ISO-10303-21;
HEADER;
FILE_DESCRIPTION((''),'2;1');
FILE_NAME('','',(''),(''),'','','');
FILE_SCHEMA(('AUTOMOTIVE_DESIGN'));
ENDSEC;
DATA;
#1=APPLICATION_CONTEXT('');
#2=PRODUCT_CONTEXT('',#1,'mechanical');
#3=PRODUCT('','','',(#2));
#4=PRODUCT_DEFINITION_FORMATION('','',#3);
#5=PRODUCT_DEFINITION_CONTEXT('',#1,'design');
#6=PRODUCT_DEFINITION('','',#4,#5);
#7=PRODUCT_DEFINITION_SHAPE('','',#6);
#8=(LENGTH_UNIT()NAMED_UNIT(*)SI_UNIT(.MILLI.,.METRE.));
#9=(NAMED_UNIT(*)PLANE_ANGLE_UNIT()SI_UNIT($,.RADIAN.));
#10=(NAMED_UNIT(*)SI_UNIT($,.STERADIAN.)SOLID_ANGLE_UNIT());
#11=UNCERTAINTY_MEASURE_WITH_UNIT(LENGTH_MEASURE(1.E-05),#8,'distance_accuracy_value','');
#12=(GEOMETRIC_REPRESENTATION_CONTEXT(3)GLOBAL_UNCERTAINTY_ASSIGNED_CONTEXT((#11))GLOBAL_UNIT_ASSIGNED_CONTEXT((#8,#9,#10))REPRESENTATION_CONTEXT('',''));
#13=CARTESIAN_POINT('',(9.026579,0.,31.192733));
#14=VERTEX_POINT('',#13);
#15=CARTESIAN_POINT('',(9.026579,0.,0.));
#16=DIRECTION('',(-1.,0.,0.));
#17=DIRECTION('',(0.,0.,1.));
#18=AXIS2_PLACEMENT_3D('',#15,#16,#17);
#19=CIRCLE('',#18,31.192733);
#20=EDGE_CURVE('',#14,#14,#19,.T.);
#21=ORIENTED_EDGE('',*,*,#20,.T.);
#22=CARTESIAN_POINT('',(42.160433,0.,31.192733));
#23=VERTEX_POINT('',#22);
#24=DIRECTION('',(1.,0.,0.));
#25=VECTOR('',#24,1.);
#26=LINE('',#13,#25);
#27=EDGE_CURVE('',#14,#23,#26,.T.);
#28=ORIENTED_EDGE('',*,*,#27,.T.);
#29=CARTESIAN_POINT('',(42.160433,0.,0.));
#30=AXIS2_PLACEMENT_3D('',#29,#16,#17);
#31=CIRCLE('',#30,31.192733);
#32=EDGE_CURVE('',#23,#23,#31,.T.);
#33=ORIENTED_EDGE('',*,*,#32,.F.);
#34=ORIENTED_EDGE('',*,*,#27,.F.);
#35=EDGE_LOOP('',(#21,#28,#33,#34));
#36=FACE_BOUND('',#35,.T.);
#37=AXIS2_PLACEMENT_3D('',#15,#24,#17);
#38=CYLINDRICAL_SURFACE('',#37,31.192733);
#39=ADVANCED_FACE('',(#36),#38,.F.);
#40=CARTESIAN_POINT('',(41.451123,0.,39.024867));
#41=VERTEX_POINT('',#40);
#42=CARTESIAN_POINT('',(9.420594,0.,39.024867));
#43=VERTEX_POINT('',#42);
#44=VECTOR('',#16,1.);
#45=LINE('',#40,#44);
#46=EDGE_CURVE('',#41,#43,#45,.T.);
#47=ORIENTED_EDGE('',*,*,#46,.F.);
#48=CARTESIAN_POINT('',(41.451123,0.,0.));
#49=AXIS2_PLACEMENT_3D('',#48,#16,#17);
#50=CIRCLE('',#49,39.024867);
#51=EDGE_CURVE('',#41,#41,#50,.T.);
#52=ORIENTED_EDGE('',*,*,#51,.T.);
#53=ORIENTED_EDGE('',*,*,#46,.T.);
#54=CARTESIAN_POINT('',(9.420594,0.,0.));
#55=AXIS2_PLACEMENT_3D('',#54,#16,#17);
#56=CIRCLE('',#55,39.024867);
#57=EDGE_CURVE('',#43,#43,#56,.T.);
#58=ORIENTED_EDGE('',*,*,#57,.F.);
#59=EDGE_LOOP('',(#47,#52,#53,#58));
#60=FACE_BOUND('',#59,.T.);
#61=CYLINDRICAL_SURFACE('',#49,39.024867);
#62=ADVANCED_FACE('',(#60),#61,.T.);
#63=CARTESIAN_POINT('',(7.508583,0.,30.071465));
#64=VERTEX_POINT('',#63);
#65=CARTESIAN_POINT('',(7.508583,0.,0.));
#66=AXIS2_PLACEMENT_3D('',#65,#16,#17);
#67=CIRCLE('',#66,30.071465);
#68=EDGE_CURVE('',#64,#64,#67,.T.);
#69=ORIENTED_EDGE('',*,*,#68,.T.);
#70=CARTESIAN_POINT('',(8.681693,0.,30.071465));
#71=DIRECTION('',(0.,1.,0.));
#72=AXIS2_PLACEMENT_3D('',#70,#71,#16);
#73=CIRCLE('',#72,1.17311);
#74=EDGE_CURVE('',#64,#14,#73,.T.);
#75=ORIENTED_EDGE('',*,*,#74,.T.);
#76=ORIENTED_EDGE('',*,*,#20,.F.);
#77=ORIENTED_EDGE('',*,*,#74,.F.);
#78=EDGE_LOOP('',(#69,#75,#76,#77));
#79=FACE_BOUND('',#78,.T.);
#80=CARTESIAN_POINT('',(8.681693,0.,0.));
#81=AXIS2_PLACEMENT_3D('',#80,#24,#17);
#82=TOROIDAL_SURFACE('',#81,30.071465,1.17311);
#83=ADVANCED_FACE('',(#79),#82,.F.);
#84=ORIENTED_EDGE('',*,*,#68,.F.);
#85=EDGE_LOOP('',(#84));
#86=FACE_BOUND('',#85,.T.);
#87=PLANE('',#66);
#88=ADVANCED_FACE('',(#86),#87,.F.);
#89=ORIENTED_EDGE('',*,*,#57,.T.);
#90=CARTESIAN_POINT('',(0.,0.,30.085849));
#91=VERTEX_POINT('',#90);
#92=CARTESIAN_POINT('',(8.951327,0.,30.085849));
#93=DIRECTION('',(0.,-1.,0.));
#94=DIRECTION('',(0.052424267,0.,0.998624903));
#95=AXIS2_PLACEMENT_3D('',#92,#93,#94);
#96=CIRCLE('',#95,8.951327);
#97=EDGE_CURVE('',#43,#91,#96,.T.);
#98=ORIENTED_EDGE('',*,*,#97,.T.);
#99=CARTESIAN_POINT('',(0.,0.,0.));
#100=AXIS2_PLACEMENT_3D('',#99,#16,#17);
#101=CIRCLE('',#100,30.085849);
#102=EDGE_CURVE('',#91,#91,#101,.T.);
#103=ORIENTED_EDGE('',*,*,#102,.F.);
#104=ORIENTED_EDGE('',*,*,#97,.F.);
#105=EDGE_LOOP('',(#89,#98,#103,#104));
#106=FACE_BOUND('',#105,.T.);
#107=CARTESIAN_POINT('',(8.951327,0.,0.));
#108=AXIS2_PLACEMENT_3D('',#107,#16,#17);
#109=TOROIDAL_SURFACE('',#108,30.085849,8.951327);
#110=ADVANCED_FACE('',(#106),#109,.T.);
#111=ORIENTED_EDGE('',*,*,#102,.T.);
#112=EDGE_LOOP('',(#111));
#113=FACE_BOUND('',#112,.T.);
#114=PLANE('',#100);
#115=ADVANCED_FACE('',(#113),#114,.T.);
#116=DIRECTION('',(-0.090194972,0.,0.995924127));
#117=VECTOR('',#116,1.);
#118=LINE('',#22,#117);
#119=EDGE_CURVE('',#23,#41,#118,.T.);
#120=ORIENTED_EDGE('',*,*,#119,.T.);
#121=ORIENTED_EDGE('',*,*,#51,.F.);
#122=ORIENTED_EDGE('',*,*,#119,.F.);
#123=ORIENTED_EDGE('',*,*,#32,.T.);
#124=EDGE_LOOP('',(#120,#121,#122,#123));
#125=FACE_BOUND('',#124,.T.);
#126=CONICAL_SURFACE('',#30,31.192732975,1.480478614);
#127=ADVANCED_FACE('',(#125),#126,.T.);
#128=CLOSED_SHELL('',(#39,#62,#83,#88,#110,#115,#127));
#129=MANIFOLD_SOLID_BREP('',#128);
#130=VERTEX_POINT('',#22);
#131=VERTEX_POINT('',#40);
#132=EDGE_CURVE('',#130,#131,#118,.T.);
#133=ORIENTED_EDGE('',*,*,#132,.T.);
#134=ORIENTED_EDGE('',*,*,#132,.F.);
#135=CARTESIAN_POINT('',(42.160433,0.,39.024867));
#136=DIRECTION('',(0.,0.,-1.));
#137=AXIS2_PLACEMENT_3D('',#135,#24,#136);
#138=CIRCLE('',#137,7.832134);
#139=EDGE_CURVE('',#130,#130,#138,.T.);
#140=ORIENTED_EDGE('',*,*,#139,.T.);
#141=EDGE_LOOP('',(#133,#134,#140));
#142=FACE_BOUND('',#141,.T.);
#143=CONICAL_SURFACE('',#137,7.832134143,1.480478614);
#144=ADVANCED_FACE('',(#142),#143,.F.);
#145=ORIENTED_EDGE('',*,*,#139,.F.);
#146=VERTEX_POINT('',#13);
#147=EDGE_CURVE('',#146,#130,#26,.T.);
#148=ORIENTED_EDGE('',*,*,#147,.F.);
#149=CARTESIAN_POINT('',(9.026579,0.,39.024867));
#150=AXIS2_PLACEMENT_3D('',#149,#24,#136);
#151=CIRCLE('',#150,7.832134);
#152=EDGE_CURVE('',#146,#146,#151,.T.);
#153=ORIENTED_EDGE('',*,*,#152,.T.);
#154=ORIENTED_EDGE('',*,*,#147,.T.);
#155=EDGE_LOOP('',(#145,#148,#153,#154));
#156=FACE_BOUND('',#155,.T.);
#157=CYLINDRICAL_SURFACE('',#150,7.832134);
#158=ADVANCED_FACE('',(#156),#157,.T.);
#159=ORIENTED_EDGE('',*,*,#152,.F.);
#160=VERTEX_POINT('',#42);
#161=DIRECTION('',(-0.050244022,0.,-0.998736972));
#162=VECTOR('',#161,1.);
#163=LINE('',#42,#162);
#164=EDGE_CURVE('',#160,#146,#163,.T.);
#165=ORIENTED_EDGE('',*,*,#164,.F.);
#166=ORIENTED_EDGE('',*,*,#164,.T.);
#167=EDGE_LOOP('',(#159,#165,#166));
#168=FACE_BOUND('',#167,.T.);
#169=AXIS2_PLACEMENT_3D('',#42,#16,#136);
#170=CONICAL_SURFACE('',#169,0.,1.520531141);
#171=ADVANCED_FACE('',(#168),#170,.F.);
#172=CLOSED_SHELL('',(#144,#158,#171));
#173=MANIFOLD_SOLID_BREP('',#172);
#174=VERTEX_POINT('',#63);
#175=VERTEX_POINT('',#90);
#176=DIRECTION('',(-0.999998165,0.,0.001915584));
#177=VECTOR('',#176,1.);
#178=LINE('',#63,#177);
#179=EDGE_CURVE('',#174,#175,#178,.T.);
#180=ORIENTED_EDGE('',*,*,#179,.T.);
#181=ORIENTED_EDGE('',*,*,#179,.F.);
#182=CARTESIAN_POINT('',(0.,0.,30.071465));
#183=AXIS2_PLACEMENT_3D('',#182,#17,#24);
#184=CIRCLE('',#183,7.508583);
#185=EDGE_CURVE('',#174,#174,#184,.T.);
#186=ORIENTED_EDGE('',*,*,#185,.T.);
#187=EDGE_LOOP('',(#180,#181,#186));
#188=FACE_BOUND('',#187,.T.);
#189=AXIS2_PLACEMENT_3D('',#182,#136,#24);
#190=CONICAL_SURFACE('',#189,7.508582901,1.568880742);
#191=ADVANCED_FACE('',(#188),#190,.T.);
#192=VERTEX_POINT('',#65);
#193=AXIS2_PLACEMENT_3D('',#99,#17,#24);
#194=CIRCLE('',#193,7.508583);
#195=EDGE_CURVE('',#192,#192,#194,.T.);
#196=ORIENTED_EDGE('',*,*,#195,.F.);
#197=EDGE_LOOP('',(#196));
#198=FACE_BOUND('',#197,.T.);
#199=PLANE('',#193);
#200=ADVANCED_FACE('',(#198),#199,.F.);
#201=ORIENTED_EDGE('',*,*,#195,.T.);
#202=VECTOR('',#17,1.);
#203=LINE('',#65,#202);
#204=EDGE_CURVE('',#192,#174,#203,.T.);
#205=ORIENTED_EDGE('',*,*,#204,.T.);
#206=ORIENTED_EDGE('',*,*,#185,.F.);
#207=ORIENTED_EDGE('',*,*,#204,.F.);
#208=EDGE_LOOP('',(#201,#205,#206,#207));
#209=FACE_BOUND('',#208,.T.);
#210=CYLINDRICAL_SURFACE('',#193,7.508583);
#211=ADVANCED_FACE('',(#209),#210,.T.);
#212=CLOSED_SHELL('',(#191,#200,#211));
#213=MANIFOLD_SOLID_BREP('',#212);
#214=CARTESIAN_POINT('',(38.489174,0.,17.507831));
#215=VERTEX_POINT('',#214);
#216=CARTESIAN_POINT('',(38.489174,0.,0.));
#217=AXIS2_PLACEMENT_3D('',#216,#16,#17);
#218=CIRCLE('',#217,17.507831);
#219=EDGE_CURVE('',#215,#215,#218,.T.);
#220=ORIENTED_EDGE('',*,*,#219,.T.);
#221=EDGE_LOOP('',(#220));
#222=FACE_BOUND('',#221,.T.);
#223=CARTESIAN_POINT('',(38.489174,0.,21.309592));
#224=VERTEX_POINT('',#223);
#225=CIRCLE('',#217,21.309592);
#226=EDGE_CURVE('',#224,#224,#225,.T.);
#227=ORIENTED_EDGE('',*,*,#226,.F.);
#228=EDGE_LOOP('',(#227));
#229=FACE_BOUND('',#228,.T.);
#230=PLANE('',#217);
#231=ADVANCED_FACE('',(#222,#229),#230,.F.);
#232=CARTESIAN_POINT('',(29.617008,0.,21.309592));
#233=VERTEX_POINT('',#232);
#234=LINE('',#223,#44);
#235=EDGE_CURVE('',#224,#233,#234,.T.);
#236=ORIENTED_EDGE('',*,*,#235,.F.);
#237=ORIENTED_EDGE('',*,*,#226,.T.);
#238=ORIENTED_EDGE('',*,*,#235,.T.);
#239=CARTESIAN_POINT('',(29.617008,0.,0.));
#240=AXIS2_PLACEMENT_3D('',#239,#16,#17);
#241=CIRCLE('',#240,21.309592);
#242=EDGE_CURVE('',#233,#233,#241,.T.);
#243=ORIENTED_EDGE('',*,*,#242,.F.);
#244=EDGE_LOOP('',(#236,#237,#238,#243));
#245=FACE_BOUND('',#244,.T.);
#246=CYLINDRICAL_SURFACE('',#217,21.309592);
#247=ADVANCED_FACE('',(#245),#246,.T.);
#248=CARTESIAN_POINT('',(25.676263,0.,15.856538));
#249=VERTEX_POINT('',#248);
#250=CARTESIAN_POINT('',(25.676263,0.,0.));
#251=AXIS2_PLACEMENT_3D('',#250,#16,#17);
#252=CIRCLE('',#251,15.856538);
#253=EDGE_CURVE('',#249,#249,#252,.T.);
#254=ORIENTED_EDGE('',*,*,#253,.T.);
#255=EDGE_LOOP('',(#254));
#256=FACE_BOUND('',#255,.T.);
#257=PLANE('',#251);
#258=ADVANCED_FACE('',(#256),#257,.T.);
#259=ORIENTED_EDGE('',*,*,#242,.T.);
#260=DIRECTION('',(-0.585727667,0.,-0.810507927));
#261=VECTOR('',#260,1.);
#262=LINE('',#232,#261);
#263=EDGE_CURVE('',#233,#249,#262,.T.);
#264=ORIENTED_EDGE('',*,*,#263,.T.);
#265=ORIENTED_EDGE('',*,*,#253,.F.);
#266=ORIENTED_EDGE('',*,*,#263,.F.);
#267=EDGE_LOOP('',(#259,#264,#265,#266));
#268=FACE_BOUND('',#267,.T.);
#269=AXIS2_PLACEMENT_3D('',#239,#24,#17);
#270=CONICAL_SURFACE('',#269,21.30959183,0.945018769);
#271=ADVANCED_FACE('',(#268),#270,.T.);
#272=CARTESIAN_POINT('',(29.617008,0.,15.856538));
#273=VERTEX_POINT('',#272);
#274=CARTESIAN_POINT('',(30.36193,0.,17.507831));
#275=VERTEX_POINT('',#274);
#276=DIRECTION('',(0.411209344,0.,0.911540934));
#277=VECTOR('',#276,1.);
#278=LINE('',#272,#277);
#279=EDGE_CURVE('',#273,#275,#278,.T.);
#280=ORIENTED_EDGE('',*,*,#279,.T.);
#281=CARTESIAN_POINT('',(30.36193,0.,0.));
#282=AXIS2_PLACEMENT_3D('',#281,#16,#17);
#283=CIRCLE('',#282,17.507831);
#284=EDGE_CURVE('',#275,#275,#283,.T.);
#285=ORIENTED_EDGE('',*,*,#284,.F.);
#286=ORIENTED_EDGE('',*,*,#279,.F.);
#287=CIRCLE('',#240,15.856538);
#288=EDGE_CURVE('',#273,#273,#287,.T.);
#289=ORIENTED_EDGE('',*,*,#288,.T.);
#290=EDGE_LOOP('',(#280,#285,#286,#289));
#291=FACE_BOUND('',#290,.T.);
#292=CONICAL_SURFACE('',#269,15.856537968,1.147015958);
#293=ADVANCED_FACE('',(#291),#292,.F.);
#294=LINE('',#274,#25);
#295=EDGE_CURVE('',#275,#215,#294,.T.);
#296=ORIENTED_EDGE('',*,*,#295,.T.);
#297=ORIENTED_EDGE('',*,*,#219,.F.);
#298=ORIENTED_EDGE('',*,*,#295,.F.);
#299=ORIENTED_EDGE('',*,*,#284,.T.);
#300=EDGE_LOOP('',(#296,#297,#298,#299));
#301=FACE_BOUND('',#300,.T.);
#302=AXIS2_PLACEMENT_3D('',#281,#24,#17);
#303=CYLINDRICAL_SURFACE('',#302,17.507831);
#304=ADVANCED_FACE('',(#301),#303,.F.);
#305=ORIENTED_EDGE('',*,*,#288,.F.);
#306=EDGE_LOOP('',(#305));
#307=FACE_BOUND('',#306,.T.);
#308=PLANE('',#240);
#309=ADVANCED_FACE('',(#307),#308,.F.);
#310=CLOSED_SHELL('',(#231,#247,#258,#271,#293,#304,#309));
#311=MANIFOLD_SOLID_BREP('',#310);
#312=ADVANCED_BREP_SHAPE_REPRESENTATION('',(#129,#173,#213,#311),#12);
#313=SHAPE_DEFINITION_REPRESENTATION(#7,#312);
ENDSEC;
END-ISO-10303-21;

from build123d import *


# Not quite as in the source:
# - the program builds the solid bodies; features that only make, move or delete a surface that nothing else refers to are left out


with BuildPart() as f1:
    # F0 (on Front) → F1 (revolve)
    with BuildSketch(Plane.XZ):
        Polygon((0, 30.0858486444), (0, 0), (7.5085829012, 0), (7.5085829012, 30.0714652985), align=None)
    revolve(axis=Axis((0, 0, 15.0429243222), (0, 0, 1)))


with BuildPart() as f2:
    # F0 (on Front) → F2 (revolve)
    with BuildSketch(Plane.XZ):
        Polygon((41.4511226118, 39.0248671174), (9.4205942005, 39.0248671174), (9.0265786275, 31.1927329749), (42.1604327857, 31.1927329749), align=None)
    revolve(axis=Axis((25.4358584061, 0, 39.0248671174), (1, 0, 0)))


with BuildPart() as f4:
    # F0 (on Front) → F4 (revolve)
    with BuildSketch(Plane.XZ):
        Polygon((25.6762634963, 15.8565379679), (25.6762634963, 0), (29.6170078218, 0), (29.6170078218, 15.8565379679), (30.3619299084, 17.5078306347), (38.4891740978, 17.5078306347), (38.4891740978, 21.3095918298), (29.6170078218, 21.3095918298), align=None)
    revolve(axis=Axis((27.646635659, 0, 0), (-1, 0, 0)))


with BuildPart() as f4b:
    # F0 (on Front) → F4, piece 2 (revolve)
    with BuildSketch(Plane.XZ):
        Polygon((0, 30.0858486444), (0, 0), (7.5085829012, 0), (7.5085829012, 30.0714652985), align=None)
        Polygon((41.4511226118, 39.0248671174), (9.4205942005, 39.0248671174), (9.0265786275, 31.1927329749), (42.1604327857, 31.1927329749), align=None)
        with BuildLine():
            ThreePointArc((9.4205942005, 39.0248671174), (2.7899273364, 36.5791845812), (0, 30.0858486444))
            Line((0, 30.0858486444), (7.5085829012, 30.0714652985))
            ThreePointArc((7.5085829012, 30.0714652985), (7.9846999977, 31.015069059), (9.0265786275, 31.1927329749))
            Line((9.0265786275, 31.1927329749), (9.4205942005, 39.0248671174))
        make_face()
    revolve(axis=Axis((27.646635659, 0, 0), (-1, 0, 0)))


solid = Compound([f1.part, f2.part, f4.part, f4b.part])
